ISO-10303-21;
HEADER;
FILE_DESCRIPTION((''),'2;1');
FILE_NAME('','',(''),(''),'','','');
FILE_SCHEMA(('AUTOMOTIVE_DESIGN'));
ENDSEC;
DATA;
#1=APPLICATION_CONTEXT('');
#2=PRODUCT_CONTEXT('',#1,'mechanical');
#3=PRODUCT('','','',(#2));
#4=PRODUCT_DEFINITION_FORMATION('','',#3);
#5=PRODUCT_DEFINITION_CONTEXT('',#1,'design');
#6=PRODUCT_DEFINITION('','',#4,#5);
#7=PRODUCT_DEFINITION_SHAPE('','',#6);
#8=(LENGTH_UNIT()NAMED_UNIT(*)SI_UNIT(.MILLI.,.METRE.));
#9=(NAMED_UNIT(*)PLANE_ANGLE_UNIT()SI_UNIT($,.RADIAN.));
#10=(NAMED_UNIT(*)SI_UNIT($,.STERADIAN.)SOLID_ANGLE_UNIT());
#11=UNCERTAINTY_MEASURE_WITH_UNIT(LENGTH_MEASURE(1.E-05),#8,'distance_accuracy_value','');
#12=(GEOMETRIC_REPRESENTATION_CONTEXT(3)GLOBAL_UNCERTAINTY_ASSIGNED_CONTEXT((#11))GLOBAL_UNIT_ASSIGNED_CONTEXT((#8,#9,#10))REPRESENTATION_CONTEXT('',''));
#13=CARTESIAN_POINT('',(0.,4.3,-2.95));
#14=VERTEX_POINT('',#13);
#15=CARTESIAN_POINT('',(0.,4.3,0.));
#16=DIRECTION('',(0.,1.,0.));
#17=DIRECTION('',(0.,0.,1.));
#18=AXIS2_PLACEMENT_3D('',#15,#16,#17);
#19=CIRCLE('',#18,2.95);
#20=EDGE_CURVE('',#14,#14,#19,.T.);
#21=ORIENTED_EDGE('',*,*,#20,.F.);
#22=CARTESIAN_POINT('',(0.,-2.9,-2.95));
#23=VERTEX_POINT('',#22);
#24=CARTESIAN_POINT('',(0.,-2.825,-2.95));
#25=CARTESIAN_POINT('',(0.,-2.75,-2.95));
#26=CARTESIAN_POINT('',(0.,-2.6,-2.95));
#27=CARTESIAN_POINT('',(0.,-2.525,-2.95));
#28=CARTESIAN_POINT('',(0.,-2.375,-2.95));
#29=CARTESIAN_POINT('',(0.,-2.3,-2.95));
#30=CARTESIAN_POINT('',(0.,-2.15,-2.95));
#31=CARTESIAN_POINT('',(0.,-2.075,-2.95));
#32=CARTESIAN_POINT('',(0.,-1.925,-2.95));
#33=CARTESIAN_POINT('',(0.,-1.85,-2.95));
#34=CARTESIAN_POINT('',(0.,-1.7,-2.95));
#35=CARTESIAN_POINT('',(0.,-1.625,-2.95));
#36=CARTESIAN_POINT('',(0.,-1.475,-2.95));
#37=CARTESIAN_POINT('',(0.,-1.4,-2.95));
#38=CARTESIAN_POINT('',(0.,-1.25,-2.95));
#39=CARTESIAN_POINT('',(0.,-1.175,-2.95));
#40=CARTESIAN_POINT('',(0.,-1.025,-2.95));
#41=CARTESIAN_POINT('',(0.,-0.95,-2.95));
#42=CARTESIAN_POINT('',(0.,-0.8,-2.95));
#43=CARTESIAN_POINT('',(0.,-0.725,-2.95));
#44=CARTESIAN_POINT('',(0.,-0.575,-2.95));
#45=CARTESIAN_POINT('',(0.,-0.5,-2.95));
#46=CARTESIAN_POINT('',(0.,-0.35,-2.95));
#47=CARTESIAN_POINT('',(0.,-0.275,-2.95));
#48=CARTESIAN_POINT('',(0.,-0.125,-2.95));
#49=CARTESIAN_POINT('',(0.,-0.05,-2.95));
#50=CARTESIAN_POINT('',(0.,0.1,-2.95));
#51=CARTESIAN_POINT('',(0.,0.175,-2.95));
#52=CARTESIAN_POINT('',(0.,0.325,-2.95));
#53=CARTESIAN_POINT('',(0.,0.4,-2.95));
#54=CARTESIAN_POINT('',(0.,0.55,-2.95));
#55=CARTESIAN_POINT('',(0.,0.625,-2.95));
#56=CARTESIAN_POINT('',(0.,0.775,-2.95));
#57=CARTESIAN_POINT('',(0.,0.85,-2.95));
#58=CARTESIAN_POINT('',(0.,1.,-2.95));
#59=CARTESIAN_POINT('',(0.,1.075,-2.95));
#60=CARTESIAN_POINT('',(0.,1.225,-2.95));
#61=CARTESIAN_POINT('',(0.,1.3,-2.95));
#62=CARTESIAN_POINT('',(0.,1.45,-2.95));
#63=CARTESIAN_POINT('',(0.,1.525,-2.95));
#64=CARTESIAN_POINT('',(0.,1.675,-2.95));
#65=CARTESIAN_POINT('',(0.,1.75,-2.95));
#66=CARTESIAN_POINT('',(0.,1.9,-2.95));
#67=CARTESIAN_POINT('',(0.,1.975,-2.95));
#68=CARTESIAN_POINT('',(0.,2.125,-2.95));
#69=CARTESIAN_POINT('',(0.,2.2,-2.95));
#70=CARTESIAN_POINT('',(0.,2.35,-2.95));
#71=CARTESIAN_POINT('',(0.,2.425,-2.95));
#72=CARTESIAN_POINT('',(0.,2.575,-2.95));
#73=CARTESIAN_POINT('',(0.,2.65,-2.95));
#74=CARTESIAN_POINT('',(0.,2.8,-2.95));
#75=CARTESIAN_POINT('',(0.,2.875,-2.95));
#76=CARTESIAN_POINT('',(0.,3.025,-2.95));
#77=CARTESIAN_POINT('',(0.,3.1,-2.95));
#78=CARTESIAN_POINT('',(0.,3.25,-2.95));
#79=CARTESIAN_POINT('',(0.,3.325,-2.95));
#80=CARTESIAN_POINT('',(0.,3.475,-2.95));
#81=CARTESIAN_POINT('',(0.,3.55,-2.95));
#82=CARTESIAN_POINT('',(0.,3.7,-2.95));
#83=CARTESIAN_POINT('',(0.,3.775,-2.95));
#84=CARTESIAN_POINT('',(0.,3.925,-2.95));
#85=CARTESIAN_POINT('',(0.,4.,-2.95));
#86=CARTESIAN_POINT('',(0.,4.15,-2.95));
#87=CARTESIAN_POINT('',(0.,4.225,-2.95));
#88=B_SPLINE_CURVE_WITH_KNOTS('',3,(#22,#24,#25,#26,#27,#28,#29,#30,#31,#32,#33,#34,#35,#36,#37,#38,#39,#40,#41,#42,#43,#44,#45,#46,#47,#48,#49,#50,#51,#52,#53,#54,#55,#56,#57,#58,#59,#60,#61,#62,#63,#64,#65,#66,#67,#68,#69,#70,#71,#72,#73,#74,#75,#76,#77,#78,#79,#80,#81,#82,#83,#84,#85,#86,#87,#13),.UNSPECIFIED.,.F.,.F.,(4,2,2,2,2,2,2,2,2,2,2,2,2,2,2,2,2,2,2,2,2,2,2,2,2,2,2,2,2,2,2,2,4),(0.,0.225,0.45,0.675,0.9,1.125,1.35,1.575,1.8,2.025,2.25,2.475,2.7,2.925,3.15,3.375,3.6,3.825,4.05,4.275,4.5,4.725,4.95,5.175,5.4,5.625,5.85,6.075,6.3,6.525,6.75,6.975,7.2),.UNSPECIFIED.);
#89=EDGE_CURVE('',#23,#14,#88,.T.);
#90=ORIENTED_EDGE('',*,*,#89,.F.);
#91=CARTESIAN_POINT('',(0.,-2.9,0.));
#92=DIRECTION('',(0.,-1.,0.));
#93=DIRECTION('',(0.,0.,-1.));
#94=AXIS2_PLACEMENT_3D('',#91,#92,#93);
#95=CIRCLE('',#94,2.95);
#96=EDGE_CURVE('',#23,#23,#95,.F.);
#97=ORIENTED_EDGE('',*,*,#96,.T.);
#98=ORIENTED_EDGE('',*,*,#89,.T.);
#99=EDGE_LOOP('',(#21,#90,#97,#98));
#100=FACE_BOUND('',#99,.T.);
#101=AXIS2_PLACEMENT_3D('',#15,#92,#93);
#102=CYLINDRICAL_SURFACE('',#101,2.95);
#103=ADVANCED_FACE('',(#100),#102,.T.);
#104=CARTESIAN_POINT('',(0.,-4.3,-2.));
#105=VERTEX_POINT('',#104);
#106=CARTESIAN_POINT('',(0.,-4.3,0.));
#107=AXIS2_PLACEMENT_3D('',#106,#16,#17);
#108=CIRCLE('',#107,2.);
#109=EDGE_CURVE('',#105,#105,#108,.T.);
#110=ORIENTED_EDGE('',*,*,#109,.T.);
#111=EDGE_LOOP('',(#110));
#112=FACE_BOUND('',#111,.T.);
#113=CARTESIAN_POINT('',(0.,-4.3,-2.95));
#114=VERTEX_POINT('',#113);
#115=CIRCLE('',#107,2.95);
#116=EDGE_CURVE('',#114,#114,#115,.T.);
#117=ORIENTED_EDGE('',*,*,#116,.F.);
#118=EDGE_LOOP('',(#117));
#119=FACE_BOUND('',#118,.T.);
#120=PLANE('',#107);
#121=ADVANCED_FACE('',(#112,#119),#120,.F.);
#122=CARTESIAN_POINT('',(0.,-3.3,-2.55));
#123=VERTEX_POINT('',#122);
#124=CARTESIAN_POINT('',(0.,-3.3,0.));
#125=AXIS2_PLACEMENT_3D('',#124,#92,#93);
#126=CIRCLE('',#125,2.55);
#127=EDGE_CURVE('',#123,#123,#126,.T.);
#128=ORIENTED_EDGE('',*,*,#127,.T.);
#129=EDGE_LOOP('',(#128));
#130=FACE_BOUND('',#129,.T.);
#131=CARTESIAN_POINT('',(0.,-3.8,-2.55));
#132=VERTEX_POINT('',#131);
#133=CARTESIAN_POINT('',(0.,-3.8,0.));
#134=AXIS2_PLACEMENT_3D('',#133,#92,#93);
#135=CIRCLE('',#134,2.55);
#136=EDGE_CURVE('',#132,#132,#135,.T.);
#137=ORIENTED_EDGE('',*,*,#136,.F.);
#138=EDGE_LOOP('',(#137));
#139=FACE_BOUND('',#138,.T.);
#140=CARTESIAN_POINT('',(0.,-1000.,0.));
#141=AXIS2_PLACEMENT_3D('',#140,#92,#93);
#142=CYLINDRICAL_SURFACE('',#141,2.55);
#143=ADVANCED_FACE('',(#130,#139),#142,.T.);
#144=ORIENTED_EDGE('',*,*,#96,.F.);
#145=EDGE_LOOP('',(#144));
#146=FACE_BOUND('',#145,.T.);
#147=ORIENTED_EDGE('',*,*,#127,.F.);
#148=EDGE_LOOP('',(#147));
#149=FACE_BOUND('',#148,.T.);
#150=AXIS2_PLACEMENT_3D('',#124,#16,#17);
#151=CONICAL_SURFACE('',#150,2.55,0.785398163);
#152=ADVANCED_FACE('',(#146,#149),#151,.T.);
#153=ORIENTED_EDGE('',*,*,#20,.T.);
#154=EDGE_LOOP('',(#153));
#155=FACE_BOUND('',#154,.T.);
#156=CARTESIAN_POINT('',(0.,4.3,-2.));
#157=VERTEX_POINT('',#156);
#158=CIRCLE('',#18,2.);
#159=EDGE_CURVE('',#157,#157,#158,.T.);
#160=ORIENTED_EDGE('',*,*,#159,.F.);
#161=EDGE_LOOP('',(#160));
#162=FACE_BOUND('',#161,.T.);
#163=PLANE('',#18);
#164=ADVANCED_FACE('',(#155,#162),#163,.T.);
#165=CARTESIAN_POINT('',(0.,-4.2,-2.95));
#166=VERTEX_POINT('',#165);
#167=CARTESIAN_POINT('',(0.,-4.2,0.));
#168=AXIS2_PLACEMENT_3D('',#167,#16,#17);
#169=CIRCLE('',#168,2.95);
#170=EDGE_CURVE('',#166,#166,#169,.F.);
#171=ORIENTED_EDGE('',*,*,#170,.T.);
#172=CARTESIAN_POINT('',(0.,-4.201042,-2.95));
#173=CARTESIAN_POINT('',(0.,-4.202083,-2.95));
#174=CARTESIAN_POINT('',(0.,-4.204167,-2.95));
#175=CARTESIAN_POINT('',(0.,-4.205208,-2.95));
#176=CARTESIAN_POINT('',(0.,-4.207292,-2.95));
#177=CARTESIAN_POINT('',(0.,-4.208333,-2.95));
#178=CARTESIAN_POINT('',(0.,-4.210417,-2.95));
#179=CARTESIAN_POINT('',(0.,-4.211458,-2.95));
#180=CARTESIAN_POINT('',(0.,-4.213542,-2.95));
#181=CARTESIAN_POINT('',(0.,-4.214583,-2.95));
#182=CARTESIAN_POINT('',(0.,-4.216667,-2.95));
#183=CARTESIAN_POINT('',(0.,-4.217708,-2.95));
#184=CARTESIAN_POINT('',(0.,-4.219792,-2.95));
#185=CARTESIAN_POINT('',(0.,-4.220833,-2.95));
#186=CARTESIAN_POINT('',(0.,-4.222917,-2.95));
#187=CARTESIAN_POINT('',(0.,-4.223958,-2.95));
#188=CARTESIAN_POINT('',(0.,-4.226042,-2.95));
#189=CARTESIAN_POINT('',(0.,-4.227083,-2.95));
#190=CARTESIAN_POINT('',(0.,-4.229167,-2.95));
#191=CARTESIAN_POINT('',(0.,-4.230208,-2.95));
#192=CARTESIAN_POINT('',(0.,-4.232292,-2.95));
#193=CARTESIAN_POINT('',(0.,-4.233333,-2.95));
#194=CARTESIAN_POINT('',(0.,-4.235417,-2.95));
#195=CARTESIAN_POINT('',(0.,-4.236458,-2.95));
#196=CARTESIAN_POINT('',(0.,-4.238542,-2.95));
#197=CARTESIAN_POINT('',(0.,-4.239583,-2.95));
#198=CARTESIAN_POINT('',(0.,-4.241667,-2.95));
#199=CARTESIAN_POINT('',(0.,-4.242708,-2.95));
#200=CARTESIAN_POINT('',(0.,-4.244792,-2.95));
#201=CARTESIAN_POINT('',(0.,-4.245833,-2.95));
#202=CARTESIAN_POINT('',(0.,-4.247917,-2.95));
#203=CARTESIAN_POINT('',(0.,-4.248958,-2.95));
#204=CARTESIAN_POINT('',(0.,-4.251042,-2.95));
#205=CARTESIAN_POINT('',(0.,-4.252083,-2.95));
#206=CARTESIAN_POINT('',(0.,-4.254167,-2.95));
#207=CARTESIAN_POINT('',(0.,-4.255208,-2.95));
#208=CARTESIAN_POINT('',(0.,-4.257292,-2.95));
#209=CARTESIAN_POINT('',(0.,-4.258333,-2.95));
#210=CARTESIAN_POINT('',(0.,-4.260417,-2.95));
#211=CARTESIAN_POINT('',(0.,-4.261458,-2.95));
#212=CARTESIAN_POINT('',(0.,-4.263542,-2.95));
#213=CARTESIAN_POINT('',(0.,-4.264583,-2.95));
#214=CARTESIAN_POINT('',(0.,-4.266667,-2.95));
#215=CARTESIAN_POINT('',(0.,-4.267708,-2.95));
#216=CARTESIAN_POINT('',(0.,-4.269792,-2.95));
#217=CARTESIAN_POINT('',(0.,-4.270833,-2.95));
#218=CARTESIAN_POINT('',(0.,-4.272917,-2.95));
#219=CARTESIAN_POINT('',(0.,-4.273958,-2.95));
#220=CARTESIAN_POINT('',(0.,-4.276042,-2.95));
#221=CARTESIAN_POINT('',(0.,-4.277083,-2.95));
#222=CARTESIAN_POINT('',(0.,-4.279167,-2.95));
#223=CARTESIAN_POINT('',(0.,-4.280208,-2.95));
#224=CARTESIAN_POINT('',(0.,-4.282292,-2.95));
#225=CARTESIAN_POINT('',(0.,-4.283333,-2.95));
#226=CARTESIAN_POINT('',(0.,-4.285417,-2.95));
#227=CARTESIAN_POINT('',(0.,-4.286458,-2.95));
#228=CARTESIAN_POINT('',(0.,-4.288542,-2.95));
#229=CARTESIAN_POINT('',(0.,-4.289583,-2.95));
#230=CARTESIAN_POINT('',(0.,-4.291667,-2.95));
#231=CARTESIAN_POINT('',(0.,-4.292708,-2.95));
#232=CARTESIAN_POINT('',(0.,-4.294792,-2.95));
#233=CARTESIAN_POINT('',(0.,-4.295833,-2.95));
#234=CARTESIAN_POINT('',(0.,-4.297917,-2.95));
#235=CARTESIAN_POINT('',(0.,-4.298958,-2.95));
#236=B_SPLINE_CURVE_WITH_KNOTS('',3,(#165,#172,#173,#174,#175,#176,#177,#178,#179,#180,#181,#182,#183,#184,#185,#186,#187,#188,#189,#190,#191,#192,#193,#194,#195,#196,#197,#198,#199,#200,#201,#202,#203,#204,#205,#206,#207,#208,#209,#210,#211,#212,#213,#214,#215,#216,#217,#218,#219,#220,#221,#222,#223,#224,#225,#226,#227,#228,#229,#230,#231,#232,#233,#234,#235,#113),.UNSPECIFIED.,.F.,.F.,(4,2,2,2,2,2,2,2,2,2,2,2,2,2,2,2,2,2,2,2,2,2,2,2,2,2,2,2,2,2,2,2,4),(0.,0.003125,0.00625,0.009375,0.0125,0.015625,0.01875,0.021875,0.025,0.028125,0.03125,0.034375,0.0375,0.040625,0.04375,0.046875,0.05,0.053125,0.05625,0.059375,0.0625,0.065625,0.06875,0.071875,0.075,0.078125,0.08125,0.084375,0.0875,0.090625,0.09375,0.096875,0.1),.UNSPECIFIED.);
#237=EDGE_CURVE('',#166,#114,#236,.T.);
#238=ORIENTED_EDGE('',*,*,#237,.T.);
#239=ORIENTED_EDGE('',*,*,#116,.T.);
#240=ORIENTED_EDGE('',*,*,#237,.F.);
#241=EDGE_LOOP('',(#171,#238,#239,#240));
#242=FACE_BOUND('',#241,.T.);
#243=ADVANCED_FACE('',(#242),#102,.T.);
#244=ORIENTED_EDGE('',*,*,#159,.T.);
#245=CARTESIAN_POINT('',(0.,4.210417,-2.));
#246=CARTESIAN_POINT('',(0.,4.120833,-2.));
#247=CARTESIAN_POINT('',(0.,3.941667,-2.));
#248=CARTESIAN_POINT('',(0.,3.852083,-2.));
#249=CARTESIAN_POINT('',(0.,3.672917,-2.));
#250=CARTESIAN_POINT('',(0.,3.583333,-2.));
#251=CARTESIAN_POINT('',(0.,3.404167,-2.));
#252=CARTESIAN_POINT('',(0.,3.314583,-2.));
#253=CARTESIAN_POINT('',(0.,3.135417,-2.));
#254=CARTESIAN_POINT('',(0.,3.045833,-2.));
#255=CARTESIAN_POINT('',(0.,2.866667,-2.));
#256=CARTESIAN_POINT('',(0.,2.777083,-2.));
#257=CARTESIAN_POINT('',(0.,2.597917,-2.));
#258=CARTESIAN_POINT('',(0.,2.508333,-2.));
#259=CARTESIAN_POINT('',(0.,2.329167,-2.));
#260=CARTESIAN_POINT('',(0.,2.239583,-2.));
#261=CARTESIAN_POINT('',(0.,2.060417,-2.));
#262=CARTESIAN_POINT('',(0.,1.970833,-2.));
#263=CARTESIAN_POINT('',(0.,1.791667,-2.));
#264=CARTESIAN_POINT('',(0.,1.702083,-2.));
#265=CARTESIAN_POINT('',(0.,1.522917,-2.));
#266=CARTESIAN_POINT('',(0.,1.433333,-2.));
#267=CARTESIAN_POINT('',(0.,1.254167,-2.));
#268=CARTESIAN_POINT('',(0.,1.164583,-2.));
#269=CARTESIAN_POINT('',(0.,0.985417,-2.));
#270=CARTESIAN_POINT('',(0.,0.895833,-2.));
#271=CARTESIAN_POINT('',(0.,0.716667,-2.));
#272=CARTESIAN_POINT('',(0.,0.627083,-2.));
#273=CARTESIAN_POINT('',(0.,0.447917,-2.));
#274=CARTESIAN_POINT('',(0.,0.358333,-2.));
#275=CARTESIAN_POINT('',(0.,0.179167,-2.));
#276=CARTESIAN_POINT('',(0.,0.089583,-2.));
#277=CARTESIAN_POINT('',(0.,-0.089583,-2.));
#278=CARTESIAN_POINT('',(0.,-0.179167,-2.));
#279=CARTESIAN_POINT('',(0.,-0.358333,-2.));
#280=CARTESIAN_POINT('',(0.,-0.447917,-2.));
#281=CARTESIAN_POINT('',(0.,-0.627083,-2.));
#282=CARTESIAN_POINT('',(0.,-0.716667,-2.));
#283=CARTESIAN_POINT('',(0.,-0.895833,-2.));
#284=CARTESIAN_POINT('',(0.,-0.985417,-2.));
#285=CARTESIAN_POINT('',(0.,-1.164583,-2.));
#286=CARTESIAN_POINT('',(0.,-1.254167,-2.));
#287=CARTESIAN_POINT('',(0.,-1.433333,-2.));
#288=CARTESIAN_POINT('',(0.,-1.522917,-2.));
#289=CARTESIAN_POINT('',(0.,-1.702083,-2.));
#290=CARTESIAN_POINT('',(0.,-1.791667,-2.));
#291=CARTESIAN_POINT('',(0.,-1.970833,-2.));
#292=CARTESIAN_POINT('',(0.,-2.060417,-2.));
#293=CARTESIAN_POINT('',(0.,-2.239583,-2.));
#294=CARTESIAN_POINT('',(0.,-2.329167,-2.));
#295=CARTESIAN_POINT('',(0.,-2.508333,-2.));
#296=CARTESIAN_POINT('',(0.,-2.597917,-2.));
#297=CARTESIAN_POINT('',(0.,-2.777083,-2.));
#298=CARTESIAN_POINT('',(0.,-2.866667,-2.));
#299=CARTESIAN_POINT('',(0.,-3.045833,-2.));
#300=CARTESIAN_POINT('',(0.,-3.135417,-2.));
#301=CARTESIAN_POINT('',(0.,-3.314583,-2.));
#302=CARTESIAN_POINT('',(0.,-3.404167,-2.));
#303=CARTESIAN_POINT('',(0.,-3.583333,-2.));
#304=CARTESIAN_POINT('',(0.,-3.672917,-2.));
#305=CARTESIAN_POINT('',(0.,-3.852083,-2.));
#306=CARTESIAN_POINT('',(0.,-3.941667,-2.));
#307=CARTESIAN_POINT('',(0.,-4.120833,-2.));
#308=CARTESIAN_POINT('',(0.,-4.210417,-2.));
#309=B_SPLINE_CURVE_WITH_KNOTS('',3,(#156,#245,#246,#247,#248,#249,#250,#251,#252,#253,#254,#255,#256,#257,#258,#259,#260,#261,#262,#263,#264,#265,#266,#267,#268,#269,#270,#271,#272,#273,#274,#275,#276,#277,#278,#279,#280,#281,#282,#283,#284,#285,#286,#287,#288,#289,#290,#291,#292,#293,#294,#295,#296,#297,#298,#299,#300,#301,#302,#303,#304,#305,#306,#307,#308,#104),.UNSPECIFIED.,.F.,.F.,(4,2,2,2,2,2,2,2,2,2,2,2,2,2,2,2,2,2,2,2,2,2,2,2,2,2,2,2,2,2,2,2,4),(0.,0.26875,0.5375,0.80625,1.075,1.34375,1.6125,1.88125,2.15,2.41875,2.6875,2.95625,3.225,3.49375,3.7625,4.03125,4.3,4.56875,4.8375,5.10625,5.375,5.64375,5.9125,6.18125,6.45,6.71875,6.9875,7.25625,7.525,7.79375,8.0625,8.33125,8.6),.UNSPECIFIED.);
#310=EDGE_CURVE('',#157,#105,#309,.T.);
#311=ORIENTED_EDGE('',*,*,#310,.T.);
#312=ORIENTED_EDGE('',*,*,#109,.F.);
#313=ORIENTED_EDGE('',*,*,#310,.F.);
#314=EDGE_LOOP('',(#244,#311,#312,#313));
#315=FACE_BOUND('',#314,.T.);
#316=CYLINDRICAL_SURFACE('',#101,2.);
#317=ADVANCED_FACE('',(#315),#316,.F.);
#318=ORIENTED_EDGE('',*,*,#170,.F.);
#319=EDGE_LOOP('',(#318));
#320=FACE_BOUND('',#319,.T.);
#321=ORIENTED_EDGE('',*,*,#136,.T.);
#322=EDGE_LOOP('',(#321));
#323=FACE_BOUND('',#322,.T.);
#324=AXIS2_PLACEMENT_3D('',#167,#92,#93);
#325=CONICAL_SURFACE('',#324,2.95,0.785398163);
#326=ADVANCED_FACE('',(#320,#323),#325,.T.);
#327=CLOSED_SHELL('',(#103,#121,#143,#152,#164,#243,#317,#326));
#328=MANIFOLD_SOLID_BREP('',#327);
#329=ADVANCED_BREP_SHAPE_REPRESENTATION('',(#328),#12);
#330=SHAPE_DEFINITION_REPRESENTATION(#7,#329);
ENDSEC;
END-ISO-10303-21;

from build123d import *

# Parameters (mm, degrees)
SKETCH_1_R      = 2.95
SKETCH_1_R_2    = 2
EXTRUDE_1_DEPTH = 4.3
SKETCH_2_W      = 0.4
SKETCH_2_H      = 0.5
CHAMFER_1_SIZE  = 0.4


with BuildPart() as part:
    # 草图1 → 凸台-拉伸1 (new, symmetric)
    with BuildSketch(Plane(origin=(0, 0, 0), x_dir=(1, 0, 0), z_dir=(0, 1, 0))):
        with Locations(Location((0, 0, 0), (0, 0, 90))):
            Circle(SKETCH_1_R)
        with Locations(Location((0, 0, 0), (0, 0, 90))):
            Circle(SKETCH_1_R_2, mode=Mode.SUBTRACT)
    extrude(amount=EXTRUDE_1_DEPTH, both=True)

    # 草图2 → 切除-旋转1 (revolve, cut)
    with BuildSketch(Plane(origin=(0, 0, 0), x_dir=(0, 0, -1), z_dir=(1, 0, 0)), mode=Mode.PRIVATE) as cut_revolve_1_sk:
        with Locations((-2.75, -3.55)):
            Rectangle(SKETCH_2_W, SKETCH_2_H)
    revolve(cut_revolve_1_sk.sketch.rotate(Axis((0, -1000, 0), (0, 1, 0)), 180), axis=Axis((0, -1000, 0), (0, 1, 0)), mode=Mode.SUBTRACT)

    # 倒角1
    chamfer_1_edges = [part.edges().sort_by_distance(p)[0] for p in [
        (0, -3.3, 2.95),
        (0, -3.8, 2.95),
    ]]
    chamfer(chamfer_1_edges, length=CHAMFER_1_SIZE - 0.0001)  # a hair under: the kernel refuses the full size


solid = part.part
